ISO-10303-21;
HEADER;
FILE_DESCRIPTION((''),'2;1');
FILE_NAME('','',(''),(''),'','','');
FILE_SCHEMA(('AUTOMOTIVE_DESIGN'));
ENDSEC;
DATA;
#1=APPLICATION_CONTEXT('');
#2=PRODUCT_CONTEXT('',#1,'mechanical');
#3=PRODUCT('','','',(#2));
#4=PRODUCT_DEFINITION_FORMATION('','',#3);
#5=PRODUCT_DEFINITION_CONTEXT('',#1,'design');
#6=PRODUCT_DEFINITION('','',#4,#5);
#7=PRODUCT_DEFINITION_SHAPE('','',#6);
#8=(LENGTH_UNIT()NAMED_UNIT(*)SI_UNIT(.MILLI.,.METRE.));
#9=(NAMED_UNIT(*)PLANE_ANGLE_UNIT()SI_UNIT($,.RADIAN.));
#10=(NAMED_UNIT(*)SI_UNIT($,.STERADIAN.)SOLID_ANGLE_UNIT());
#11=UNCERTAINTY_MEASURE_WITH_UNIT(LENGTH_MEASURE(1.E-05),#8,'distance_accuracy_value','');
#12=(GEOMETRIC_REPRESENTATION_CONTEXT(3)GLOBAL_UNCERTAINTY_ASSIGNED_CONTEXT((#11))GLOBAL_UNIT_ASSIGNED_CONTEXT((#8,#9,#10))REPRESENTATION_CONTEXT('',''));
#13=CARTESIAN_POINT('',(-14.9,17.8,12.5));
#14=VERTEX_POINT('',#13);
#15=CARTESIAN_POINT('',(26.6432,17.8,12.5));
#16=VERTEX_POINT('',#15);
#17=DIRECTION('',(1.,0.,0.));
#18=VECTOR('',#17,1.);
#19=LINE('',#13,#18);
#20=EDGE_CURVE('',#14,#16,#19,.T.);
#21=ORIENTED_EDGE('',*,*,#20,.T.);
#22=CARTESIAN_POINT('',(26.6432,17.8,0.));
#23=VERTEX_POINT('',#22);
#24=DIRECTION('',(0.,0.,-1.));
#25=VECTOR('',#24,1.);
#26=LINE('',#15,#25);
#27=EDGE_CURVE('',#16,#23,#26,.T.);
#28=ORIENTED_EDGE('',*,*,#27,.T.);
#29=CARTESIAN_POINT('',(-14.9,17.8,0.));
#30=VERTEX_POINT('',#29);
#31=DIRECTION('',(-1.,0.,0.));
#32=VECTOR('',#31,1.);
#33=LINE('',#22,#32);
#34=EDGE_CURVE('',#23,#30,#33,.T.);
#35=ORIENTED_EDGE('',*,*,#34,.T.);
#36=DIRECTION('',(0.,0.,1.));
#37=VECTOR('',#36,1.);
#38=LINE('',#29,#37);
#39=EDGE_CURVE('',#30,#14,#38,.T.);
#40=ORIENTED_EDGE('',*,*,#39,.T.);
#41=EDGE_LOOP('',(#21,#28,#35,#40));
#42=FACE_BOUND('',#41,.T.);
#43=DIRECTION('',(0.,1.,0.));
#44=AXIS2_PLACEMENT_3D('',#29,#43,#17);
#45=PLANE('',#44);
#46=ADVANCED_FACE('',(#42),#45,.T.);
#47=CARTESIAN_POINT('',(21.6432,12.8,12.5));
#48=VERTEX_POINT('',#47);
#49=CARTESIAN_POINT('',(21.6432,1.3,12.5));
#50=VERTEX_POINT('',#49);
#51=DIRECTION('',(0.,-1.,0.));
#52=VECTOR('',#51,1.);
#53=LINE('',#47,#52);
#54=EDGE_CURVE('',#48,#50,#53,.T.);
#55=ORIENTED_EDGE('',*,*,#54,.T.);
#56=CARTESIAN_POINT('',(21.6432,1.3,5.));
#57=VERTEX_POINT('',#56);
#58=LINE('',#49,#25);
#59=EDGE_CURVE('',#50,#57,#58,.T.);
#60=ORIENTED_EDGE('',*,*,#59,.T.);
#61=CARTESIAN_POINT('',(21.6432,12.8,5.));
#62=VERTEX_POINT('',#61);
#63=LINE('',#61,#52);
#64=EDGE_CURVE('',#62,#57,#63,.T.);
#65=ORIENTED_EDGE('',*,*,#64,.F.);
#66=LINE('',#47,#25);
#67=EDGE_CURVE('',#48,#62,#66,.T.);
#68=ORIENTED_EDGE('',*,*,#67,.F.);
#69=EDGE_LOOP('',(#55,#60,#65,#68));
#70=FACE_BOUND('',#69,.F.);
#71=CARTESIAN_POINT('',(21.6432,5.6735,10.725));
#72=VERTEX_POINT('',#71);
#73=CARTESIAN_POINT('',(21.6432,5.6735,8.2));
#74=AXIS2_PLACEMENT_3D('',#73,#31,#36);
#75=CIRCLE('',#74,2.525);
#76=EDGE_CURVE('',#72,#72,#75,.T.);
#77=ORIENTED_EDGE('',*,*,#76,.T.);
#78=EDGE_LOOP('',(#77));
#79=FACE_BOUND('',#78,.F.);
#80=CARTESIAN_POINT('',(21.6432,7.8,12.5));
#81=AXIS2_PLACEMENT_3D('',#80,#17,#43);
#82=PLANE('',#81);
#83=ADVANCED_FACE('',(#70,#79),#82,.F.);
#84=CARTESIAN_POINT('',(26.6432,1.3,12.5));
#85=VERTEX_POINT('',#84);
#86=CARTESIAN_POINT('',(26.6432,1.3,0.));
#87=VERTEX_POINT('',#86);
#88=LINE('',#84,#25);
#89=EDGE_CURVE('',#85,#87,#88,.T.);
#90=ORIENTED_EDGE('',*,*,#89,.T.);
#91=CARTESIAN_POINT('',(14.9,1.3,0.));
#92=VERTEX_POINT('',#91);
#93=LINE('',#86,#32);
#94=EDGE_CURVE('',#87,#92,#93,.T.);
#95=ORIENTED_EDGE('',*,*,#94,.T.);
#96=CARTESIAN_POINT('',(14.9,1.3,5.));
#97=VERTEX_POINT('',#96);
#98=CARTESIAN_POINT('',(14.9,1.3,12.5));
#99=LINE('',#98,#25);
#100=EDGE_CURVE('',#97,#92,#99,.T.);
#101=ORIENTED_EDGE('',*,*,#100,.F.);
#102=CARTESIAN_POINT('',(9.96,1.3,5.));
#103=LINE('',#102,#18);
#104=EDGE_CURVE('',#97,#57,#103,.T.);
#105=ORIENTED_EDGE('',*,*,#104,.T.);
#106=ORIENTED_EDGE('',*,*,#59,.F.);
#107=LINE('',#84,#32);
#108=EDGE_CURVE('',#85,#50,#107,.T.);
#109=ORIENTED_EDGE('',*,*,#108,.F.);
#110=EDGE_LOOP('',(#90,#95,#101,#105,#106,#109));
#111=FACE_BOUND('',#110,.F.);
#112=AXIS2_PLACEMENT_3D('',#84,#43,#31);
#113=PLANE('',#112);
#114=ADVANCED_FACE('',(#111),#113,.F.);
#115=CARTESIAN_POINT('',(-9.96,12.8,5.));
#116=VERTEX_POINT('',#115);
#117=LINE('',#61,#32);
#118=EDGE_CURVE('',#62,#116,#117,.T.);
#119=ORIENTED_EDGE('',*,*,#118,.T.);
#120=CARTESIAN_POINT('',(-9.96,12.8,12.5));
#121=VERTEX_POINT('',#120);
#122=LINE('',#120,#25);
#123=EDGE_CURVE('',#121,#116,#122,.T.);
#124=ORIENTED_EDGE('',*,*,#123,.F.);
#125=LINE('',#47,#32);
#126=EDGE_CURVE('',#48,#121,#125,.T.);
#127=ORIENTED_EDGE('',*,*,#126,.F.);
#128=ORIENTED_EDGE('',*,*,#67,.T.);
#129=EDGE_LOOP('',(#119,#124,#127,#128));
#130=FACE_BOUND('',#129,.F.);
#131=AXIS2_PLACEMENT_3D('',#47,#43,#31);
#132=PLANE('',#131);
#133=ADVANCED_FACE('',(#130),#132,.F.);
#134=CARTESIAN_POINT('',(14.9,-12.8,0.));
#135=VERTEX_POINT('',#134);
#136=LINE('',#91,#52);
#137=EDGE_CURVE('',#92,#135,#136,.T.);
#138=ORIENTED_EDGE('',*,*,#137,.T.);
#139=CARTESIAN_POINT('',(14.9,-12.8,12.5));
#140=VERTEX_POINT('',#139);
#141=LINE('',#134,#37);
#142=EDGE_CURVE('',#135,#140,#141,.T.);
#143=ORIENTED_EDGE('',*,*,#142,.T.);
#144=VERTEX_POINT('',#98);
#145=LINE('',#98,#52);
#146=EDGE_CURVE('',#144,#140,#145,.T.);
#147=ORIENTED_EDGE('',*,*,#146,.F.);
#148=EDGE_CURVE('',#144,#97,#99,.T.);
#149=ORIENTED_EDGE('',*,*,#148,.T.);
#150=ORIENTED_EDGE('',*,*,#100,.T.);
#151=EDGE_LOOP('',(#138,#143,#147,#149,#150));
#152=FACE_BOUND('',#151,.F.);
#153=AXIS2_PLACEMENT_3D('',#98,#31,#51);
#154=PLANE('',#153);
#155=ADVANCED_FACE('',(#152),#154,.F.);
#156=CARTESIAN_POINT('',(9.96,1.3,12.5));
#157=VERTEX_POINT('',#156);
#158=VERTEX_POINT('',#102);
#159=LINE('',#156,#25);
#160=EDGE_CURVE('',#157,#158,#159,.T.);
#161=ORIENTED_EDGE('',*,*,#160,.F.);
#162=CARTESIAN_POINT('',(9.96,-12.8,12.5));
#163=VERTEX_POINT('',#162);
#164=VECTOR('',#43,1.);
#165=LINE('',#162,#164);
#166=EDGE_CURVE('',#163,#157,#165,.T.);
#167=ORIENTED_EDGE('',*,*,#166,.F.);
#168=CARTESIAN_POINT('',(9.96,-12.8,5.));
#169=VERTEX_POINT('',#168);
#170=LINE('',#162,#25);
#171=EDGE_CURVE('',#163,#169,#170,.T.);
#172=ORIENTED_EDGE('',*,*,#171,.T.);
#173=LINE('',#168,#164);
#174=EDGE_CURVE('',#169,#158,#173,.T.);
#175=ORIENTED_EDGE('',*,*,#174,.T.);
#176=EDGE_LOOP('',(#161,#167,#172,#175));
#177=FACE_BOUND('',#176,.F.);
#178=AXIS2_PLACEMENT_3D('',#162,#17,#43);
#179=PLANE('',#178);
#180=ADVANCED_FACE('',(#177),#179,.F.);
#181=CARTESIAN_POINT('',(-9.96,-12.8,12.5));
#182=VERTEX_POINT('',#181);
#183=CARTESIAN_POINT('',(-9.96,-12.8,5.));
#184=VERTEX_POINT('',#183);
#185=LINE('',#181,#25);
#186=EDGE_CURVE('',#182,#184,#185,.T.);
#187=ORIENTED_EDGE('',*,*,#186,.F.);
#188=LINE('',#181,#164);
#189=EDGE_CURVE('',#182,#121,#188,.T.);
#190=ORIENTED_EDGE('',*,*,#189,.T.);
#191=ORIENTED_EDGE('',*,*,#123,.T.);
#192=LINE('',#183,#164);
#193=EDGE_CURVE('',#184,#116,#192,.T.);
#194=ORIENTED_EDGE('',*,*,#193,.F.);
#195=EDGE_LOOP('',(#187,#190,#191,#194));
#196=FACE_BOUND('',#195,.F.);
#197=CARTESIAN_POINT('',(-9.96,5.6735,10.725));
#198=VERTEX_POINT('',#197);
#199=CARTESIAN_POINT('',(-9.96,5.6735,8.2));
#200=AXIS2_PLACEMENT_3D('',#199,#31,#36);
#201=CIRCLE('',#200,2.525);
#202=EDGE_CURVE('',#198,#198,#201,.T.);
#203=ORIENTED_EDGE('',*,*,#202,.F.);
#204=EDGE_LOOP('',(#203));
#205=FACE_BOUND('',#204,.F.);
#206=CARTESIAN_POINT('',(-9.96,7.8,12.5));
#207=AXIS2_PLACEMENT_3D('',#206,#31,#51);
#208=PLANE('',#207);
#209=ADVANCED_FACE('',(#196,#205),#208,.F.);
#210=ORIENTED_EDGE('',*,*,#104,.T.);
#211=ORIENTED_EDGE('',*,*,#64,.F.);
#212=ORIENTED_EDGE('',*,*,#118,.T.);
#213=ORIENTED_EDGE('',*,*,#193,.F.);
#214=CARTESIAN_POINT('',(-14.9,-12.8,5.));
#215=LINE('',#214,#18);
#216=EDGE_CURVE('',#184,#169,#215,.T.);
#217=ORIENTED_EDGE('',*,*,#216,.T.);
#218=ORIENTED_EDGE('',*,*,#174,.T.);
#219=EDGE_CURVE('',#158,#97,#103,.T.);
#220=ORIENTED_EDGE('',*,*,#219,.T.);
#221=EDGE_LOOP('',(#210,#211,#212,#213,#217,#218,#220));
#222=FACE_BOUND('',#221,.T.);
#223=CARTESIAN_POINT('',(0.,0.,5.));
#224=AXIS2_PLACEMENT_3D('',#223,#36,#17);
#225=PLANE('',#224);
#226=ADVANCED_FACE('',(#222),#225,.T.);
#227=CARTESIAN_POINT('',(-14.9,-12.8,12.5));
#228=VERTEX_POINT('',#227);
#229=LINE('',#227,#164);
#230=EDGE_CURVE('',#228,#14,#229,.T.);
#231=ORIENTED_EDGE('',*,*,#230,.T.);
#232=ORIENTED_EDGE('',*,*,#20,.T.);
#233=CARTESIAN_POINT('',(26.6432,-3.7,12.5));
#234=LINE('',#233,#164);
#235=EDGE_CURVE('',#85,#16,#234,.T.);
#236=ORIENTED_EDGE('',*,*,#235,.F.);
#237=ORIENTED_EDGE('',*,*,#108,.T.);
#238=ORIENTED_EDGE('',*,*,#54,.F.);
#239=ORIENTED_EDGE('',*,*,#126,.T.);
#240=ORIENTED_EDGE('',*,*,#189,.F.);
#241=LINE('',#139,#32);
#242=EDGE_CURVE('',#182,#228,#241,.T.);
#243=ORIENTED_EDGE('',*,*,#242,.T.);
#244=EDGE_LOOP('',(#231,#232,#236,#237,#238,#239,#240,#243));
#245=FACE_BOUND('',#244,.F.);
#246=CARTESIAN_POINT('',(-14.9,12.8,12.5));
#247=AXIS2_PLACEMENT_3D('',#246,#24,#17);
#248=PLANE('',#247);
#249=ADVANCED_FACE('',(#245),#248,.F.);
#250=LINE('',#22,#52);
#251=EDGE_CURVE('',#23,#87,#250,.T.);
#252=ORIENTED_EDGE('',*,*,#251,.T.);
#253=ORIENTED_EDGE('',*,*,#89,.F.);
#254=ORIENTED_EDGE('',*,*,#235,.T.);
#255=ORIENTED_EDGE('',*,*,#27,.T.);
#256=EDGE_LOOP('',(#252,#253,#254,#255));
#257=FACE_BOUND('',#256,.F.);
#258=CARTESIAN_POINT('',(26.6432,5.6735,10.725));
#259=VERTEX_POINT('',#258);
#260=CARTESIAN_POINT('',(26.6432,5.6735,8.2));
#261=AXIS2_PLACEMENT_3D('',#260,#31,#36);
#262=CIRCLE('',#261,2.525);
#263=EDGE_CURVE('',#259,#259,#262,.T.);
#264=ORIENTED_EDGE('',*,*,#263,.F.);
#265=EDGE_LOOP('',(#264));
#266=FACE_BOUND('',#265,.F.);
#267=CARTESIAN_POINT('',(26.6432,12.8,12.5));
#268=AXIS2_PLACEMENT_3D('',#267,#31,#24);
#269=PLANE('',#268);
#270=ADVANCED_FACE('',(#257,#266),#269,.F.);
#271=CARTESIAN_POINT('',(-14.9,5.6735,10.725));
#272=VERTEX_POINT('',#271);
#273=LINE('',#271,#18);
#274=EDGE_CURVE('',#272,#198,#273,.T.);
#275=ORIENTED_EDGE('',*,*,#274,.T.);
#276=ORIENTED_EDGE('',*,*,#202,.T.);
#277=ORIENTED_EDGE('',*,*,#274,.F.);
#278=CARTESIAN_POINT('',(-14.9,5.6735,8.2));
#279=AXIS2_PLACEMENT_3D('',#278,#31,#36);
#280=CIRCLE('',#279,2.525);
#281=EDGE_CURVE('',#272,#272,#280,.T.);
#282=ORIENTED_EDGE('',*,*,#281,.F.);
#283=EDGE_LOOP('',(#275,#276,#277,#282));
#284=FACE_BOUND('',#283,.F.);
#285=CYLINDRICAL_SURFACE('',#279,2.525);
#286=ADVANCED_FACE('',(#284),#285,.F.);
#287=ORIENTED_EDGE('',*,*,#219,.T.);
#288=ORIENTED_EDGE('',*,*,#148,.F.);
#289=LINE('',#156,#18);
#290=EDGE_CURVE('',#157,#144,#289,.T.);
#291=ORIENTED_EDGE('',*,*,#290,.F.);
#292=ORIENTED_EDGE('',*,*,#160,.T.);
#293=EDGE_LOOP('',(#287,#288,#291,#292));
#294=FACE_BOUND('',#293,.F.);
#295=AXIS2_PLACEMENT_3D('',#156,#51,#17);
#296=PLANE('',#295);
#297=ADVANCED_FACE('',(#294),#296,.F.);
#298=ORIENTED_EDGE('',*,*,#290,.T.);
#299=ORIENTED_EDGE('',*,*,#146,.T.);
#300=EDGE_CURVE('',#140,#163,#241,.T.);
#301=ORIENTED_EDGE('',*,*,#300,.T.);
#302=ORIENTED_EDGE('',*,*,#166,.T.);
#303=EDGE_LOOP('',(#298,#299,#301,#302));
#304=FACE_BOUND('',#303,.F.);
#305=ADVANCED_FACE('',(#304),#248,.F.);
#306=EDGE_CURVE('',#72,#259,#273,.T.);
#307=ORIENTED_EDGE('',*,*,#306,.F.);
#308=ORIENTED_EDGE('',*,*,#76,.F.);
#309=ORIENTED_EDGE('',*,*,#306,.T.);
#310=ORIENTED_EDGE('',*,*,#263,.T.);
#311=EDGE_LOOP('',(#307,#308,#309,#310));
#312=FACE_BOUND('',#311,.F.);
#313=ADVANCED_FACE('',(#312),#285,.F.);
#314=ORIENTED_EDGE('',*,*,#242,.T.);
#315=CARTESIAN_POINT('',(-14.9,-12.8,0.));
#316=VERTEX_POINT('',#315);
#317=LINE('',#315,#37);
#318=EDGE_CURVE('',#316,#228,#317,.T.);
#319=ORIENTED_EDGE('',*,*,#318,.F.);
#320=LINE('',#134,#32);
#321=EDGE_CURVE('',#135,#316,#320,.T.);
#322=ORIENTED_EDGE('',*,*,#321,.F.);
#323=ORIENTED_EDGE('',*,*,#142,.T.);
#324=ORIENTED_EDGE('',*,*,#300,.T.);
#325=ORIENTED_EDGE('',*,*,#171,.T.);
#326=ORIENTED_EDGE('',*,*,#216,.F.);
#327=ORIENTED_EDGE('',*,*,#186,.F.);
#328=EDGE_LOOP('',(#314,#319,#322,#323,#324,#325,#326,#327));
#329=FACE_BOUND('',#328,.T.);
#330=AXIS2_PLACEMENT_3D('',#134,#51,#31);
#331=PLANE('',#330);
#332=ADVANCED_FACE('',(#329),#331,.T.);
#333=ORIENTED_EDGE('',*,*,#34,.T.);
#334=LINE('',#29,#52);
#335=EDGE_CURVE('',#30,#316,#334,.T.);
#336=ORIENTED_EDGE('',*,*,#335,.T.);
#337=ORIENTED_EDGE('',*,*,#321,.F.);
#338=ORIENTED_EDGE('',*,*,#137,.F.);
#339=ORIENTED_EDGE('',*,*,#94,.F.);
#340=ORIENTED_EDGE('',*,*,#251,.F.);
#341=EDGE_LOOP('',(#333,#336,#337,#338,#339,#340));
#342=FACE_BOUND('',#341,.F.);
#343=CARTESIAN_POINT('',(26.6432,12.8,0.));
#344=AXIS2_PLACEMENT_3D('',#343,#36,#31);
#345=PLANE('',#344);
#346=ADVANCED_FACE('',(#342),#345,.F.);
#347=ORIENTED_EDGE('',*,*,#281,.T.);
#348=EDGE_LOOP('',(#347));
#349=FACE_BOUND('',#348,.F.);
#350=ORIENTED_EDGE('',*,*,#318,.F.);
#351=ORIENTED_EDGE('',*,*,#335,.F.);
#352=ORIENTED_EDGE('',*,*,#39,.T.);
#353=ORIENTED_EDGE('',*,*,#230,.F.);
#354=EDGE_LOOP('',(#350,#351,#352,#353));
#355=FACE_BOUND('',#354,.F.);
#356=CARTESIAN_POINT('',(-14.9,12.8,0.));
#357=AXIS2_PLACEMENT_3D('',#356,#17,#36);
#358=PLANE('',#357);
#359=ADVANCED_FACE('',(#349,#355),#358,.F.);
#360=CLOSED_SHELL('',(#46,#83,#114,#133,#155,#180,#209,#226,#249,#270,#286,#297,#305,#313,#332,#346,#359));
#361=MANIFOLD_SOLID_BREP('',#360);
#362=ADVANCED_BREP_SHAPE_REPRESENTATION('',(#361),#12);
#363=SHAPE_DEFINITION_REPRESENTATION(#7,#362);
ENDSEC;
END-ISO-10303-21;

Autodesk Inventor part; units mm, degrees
ref_plane "YZ Plane" through (0, 0, 0) normal (1, 0, 0) x (0, 1, 0)
ref_plane "XZ Plane" through (0, 0, 0) normal (0, 1, 0) x (-1, 0, 0)
ref_plane "XY Plane" through (0, 0, 0) normal (0, 0, 1) x (1, 0, 0)
sketch "Sketch1" plane through (0, 0, 0) normal (0, 0, 1) x (1, 0, 0)
  line L0 (4.1434, -12.66) -> (3.2904, -12.66)
  line L1 (-14.9, 12.8) -> (14.9, 12.8)
  line L2 (14.9, 12.8) -> (14.9, -12.8)
  line L3 (14.9, -12.8) -> (-14.9, -12.8)
  line L4 (-14.9, -12.8) -> (-14.9, 12.8)
  point P0 (0, 0)
  point P1 (0, 12.8)
  point P2 (-14.9, 0)
  dimension "d4" = 29.8
  dimension "d5" = 25.6
extrude "Extrusion1" add sketch "Sketch1" along normal blind 12.5
sketch "Sketch2" plane through (0, 0, 12.5) normal (0, 0, 1) x (1, 0, 0)
  line L0 (-14.9, -12.8) -> (14.9, -12.8) projected
  line L1 (-9.96, -12.8) -> (9.96, -12.8)
  line L2 (9.96, -12.8) -> (9.96, 7.8)
  line L3 (9.96, 7.8) -> (-9.96, 7.8)
  line L4 (-9.96, 7.8) -> (-9.96, -12.8)
  line L5 (14.9, 12.8) -> (-14.9, 12.8) projected
  point P0 (0, 0)
  point P1 (0, 7.8)
  dimension "d8" = 19.92
  dimension "d9" = 5
extrude "Extrusion2" cut sketch "Sketch2" against normal blind 7.5
sketch "Sketch3" plane through (0, 0, 12.5) normal (0, 0, 1) x (1, 0, 0)
  line L0 (-0.14, 0.6) -> (-0.84, 1.3) projected
  line L1 (14.9, -12.8) -> (14.9, 12.8) projected
  line L2 (14.9, -3.7) -> (26.6432, -3.7)
  line L3 (26.6432, -3.7) -> (26.6432, 12.8)
  line L4 (26.6432, 12.8) -> (14.9, 12.8)
  line L5 (14.9, 12.8) -> (14.9, -3.7)
  line L6 (14.9, 12.8) -> (-14.9, 12.8) projected
  line L7 (-7.482, 1.9485) -> (17.86, 10.1145) projected
  line L8 (-7.482, 1.9485) -> (19.1432, 1.9485)
  line L9 (9.96, 7.8) -> (9.96, -12.8) projected
  line L10 (9.96, 1.3) -> (21.6432, 1.3)
  line L11 (21.6432, 1.3) -> (21.6432, 7.8)
  line L12 (21.6432, 7.8) -> (9.96, 7.8)
  line L13 (9.96, 7.8) -> (9.96, 1.3)
  line L14 (-9.96, 7.8) -> (9.96, 7.8) projected
  point P0 (0, 0)
  point P1 (15.8016, 1.3)
  point P2 (21.6432, 4.55)
  dimension "d12" = 5
  dimension "d13" = 7.5
  dimension "d14" = 5
extrude "Extrusion3" add sketch "Sketch3" against normal blind 12.5 contours L1 L10 L11 L12 L4 L3 L2 | L1 L12 L11 L10
sketch "Sketch4" plane through (0, 0, 12.5) normal (0, 0, 1) x (1, 0, 0)
  line L0 (21.6432, 7.8) -> (9.96, 7.8) projected
  line L1 (9.96, 7.8) -> (9.96, 1.3) projected
  line L2 (9.96, 1.3) -> (21.6432, 1.3) projected
  line L3 (21.6432, 1.3) -> (21.6432, 7.8) projected
  point P0 (0, 0)
extrude "Extrusion4" cut sketch "Sketch4" against normal blind 7.5
thicken "Thicken1" operation add thickness 5 both sides no extend neighbours no toward (0, 1, 0) faces at (12.7954, 12.8, 4.1667)
sketch "Sketch5" plane through (0, 0, 12.5) normal (0, 0, 1) x (1, 0, 0)
  line L0 (-9.96, 7.8) -> (21.6432, 7.8) projected
  line L1 (-9.96, 7.8) -> (21.6432, 7.8)
  line L2 (21.6432, 7.8) -> (21.6432, 12.8)
  line L3 (21.6432, 12.8) -> (-9.96, 12.8)
  line L4 (-9.96, 12.8) -> (-9.96, 7.8)
  line L5 (21.6432, 7.8) -> (21.6432, 1.3) projected
  point P0 (0, 0)
  dimension "d21" = 5
extrude "Extrusion5" cut sketch "Sketch5" against normal blind 7.5
sketch "Sketch6" plane through (-14.9, -12.8, 0) normal (-1, 0, 0) x (0, 0, 1)
  circle A0 centre (8.2, 18.4735) radius 2.525
  line L0 (10, 14.7485) -> (6.4, 14.7485) projected
  line L1 (6.6, 15.3) -> (9.8, 15.3)
  point P0 (0, 12.8)
  point P1 (8.2, 14.7485)
  point P2 (8.2, 15.9485)
  dimension "d24" = 5.05
  dimension "d25" = 1.2
extrude "Extrusion6" cut sketch "Sketch6" against normal through all
sketch "Sketch7" plane through (0, 0, 12.5) normal (0, 0, 1) x (1, 0, 0)
  line L0 (14.9, -3.7) -> (26.6432, -3.7) projected
  line L1 (26.6432, -3.7) -> (26.6432, 17.8) projected
  line L2 (14.9, -3.7) -> (26.6432, -3.7)
  line L3 (26.6432, -3.7) -> (26.6432, 1.3)
  line L4 (26.6432, 1.3) -> (14.9, 1.3)
  line L5 (14.9, 1.3) -> (14.9, -3.7)
  point P0 (0, 0)
  dimension "d28" = 5
extrude "Extrusion7" cut sketch "Sketch7" against normal through all
properties part number "SS-5FL111-3T_Housing_01"
